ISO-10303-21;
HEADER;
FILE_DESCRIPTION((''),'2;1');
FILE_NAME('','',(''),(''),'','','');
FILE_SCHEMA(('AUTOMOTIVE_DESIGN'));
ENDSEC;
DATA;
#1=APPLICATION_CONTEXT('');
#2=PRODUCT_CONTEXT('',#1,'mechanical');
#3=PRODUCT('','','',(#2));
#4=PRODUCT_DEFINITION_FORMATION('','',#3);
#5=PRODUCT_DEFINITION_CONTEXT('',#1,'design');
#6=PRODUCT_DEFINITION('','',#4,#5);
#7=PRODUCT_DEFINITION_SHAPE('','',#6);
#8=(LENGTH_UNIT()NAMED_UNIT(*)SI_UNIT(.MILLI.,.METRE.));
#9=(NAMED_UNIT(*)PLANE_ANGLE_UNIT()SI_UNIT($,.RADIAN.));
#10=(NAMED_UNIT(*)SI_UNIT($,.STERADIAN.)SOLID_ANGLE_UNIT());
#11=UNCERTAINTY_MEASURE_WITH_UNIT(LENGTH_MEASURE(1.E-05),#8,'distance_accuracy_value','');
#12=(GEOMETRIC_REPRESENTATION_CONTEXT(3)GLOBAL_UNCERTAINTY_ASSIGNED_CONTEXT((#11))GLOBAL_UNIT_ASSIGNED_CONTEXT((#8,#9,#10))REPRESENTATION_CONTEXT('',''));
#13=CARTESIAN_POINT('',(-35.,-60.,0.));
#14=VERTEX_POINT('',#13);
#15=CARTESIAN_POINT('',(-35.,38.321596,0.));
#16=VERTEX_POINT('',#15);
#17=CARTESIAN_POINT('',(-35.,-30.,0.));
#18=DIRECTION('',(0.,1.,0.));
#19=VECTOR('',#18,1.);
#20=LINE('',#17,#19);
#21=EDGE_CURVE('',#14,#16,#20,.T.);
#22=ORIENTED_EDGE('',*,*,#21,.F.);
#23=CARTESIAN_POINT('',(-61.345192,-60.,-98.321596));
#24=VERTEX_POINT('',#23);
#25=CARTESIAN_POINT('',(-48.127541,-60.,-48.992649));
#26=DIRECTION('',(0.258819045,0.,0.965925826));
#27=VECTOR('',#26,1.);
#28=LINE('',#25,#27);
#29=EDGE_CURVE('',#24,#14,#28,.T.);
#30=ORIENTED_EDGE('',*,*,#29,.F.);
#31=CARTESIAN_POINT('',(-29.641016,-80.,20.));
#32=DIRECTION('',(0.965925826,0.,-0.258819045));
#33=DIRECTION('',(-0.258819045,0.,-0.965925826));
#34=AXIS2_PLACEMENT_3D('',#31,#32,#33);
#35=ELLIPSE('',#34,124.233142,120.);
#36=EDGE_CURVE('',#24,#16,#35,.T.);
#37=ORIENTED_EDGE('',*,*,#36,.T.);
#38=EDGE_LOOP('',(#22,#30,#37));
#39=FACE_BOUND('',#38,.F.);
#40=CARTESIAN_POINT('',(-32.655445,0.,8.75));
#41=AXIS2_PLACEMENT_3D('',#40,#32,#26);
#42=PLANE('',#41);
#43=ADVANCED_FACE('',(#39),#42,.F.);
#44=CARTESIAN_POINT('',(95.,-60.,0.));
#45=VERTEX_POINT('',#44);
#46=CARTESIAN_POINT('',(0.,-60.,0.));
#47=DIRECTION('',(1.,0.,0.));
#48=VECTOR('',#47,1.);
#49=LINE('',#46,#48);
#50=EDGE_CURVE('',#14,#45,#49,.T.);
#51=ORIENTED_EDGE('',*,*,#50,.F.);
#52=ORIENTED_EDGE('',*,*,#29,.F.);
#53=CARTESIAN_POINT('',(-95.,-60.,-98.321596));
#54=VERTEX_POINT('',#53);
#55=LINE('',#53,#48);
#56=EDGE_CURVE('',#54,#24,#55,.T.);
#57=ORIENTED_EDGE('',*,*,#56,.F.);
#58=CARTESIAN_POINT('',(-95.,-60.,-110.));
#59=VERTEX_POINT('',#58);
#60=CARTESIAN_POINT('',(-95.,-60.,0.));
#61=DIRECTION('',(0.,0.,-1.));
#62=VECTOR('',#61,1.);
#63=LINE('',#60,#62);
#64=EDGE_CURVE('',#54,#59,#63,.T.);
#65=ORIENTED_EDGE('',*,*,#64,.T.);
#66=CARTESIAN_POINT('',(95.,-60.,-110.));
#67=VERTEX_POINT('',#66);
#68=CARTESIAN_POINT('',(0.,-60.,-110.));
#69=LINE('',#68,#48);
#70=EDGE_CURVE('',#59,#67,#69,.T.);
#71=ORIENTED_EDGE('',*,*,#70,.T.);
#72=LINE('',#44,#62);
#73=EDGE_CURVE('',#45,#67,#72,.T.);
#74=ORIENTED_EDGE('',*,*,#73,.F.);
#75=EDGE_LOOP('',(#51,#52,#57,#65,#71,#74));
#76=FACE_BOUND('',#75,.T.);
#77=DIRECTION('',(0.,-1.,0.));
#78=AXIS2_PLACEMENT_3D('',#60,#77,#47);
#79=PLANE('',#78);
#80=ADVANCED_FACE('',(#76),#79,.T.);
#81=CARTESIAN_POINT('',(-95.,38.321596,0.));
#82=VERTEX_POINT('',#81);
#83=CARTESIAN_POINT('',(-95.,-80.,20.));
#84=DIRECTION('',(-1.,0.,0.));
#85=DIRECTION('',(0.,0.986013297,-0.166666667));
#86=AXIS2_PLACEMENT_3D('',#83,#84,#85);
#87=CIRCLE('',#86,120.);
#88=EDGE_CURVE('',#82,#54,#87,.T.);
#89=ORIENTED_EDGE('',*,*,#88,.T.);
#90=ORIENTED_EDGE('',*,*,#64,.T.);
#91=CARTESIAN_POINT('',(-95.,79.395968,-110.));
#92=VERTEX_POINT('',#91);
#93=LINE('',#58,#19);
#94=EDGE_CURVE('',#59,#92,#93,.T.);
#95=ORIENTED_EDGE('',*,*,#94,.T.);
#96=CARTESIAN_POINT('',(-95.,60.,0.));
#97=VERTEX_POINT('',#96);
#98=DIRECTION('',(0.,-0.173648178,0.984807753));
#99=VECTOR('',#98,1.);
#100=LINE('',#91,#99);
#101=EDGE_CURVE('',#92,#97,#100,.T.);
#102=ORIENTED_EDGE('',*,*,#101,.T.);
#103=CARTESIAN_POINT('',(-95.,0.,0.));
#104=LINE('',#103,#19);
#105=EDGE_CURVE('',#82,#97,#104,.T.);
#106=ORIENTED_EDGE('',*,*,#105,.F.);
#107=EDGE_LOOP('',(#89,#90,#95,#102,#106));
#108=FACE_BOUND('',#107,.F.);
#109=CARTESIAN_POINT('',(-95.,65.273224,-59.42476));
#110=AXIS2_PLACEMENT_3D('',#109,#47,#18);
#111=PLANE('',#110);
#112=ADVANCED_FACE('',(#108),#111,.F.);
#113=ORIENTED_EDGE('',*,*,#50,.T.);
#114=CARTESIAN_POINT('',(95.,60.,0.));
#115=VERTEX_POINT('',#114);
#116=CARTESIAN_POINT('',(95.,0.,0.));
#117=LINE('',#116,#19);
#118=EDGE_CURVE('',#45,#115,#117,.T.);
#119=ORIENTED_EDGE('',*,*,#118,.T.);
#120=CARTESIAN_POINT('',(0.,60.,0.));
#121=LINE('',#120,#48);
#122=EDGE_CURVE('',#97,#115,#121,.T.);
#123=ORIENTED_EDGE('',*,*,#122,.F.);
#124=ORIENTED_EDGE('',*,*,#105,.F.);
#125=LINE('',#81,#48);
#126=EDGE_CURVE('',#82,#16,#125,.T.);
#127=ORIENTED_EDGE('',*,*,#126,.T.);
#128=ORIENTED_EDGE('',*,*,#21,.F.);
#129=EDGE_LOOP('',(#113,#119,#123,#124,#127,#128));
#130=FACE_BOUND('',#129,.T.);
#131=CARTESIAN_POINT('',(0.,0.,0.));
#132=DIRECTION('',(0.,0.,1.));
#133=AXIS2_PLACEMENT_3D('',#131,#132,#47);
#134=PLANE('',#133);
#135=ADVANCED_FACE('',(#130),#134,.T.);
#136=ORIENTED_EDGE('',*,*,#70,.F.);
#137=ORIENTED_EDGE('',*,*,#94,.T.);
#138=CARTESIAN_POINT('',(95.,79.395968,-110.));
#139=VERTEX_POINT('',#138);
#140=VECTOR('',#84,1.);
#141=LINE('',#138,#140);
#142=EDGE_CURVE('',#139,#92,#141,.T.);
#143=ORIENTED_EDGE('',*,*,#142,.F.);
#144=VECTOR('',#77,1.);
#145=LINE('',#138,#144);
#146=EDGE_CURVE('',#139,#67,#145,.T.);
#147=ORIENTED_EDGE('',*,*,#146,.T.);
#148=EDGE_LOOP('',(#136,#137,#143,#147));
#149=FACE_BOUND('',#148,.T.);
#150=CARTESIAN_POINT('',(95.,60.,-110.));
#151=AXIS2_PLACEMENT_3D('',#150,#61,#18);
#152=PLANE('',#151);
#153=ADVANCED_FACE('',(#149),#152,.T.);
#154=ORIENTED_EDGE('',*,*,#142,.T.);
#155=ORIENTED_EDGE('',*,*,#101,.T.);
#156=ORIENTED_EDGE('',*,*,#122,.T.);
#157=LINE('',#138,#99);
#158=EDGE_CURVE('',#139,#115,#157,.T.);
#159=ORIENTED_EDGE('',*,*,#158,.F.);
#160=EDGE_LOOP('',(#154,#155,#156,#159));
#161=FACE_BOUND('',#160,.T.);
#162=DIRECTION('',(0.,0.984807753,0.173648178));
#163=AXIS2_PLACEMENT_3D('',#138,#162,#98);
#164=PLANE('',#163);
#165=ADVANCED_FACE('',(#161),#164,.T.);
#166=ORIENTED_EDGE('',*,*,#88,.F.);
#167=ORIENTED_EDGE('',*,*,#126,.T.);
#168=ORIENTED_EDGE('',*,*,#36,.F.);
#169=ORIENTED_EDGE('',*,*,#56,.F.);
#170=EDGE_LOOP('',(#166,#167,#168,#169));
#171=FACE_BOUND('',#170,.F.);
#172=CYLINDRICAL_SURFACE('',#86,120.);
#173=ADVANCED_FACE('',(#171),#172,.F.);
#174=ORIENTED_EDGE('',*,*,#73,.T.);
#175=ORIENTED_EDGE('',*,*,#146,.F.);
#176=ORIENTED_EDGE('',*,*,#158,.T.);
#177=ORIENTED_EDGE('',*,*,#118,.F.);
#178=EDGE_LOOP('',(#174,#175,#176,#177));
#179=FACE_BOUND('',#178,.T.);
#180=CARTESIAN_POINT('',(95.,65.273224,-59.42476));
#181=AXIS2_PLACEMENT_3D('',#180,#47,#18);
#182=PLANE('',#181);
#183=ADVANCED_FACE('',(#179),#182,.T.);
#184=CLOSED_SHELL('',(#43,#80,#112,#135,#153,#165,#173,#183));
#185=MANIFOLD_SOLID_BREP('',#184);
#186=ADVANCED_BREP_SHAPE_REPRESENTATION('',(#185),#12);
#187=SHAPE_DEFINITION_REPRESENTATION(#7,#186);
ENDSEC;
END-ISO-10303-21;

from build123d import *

# Parameters (mm, degrees)
F0_W     = 190
F0_H     = 120
F1_DEPTH = 110
F3_DEPTH = 190
F7_REACH = 199.0477340594


with BuildPart() as f1:
    # F0 (on Top) → F1 (new body)
    with BuildSketch(Plane.XY):
        Rectangle(F0_W, F0_H)
    extrude(amount=-F1_DEPTH)

    # F2 (on face) → F3 (join, through all)
    with BuildSketch(Plane.YZ.offset(95)):
        Polygon((79.3959678779, -110), (60, 0), (60, -110), align=None)
    extrude(amount=-F3_DEPTH)

    f7_end = Plane(origin=(-32.6554445662, 0, 8.75), x_dir=(0.2588190451, 0, 0.9659258263), z_dir=(0.9659258263, 0, -0.2588190451))
    # F4 (on face) → F7 (cut, up to a plane its end follows)
    with BuildSketch(Plane(origin=(-95, 0, 0), x_dir=(0, -1, 0), z_dir=(-1, 0, 0))):
        with BuildLine():
            Line((60, -98.321595662), (60, 0))
            Line((60, 0), (-38.321595662, 0))
            ThreePointArc((-38.321595662, 0), (-4.8528137424, -64.8528137424), (60, -98.321595662))
        make_face()
    f7_long = extrude(amount=-F7_REACH, mode=Mode.PRIVATE)
    add(split(f7_long, bisect_by=f7_end, keep=Keep.BOTTOM, mode=Mode.PRIVATE), mode=Mode.SUBTRACT)


solid = f1.part
